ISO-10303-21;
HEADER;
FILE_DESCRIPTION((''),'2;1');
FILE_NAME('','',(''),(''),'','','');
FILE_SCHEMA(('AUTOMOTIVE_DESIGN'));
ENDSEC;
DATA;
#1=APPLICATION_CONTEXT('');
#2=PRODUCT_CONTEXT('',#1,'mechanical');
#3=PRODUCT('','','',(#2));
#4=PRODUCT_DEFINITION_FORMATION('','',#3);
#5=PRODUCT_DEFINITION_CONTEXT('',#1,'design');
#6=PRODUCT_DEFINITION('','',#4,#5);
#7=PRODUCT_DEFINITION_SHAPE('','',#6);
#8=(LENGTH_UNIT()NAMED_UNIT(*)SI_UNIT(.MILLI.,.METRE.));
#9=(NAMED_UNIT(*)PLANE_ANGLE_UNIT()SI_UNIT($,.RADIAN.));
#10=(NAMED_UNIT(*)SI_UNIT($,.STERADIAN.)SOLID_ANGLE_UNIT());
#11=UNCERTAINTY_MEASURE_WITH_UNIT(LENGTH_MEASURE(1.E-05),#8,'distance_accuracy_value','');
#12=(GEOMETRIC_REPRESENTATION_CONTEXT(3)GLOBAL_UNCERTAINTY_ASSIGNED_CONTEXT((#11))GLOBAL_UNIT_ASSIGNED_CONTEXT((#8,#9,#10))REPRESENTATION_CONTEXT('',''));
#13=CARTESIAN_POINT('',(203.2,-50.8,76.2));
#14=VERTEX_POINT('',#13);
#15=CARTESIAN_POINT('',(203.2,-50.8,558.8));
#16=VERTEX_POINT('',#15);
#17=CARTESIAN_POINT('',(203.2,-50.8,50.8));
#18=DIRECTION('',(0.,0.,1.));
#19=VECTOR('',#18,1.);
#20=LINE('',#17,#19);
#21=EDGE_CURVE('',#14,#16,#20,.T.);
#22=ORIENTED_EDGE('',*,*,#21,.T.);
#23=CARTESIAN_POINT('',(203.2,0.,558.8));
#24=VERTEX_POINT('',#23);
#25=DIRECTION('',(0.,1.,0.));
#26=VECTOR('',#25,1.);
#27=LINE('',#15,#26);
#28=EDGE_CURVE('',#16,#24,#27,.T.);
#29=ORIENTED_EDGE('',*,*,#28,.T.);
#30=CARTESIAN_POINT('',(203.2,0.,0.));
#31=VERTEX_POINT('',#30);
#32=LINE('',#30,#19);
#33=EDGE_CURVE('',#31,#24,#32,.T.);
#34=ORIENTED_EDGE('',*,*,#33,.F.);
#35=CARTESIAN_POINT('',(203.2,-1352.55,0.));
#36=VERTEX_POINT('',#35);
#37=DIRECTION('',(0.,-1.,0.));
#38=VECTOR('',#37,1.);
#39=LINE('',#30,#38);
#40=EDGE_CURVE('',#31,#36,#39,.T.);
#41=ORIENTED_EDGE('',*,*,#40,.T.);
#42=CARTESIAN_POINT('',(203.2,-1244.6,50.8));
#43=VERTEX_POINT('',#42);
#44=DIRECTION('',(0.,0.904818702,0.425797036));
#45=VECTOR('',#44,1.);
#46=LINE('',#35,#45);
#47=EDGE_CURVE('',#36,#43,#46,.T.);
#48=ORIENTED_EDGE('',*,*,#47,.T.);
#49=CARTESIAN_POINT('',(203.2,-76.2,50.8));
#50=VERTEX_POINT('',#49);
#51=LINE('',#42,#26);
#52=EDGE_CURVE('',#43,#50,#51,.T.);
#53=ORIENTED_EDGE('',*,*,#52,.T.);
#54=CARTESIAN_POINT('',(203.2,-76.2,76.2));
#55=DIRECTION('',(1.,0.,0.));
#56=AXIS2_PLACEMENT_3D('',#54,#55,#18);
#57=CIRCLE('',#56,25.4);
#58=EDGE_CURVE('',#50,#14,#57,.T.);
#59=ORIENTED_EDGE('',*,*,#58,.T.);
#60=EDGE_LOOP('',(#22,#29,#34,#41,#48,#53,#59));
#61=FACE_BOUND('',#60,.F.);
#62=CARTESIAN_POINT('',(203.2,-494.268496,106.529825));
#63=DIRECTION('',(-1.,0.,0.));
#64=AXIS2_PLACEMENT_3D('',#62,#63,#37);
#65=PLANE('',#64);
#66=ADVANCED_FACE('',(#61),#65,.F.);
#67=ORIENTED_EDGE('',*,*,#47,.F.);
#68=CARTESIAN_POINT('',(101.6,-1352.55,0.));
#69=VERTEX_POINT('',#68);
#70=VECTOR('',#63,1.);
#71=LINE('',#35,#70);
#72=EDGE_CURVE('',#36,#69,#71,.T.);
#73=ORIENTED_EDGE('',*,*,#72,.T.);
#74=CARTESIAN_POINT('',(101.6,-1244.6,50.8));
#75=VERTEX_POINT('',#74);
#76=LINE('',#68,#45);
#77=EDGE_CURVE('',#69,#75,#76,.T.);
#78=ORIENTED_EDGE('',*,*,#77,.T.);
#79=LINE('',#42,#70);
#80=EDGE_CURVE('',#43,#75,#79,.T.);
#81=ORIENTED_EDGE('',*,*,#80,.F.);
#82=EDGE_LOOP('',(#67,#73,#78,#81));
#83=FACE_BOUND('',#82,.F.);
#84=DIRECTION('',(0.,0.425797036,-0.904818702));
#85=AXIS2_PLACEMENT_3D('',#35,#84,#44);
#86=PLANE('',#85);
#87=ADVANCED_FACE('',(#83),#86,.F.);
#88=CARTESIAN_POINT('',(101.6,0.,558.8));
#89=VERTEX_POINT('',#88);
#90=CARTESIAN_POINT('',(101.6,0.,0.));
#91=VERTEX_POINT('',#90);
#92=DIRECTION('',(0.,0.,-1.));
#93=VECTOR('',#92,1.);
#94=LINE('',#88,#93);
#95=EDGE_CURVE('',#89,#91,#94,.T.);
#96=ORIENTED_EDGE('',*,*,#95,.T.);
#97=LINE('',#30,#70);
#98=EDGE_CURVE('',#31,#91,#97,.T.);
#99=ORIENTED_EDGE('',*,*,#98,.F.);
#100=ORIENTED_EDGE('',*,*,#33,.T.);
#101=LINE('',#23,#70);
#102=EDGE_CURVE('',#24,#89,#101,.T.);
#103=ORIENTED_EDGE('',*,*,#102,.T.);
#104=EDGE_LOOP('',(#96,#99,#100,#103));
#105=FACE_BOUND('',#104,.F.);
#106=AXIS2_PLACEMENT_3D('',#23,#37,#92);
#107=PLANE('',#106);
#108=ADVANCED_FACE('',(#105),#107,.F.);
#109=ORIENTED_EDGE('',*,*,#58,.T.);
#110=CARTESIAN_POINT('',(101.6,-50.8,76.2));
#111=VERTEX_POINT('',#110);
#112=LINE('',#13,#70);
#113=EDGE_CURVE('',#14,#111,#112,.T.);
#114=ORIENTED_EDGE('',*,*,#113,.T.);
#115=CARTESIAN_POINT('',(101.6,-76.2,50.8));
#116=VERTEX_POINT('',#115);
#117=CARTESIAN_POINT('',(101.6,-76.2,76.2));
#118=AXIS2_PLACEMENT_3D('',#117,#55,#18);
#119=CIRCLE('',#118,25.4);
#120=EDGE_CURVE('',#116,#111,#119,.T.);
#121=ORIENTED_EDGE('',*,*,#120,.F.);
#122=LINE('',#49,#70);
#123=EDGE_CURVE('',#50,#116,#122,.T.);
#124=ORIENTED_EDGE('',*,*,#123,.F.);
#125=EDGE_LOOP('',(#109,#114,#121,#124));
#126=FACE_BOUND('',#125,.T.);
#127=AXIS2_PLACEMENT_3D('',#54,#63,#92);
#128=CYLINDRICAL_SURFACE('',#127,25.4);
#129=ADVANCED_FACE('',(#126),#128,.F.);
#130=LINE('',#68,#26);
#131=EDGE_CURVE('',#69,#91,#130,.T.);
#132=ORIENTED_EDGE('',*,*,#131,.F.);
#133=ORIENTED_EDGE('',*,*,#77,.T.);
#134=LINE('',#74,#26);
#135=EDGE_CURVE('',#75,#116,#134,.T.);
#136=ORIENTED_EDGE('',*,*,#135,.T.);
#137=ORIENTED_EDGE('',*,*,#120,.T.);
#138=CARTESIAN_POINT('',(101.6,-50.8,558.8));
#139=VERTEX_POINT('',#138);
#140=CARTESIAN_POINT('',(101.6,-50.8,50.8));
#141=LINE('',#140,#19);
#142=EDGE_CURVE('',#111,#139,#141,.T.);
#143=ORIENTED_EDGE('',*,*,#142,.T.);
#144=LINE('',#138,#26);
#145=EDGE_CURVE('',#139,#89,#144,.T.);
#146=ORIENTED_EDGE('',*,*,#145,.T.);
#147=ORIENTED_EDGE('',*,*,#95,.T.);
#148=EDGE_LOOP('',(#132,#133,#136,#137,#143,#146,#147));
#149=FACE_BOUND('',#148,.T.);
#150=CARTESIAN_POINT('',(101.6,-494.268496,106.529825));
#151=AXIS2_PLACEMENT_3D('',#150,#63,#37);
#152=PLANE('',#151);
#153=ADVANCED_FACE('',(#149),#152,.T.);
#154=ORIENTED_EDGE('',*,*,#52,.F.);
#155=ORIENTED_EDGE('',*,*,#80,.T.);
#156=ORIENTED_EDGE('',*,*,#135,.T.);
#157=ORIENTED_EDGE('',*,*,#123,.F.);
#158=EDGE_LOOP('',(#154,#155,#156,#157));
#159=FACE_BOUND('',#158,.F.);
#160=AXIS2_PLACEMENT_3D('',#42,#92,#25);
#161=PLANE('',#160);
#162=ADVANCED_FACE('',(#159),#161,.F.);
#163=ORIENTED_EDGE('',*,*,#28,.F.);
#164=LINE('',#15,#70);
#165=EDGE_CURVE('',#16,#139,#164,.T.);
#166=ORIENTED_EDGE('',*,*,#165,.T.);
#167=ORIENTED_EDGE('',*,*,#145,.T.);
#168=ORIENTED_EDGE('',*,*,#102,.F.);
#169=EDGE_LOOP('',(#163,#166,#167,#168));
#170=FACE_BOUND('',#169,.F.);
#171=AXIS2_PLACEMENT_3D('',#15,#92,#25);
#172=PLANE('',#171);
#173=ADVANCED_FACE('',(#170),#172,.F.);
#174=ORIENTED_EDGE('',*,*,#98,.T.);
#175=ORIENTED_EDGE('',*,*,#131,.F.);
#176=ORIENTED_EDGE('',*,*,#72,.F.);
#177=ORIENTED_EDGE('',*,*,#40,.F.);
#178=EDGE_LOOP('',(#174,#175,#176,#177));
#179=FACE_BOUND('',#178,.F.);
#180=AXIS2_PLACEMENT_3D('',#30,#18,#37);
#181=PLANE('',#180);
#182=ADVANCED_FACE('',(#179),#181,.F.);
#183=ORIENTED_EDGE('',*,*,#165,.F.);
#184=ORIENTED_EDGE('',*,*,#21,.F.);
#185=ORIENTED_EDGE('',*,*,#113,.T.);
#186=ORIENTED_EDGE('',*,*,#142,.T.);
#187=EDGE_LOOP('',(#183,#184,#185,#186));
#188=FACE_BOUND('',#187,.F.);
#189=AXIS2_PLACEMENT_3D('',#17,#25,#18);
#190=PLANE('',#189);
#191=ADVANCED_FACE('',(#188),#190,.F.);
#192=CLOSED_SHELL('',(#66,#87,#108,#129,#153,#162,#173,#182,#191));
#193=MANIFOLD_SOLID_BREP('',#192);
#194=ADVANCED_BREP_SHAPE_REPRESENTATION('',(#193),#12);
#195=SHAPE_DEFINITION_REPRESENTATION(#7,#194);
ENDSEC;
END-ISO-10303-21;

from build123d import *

# Parameters (mm, degrees)
F1_DEPTH = 101.6
F2_R     = 25.4
F3_R     = 25.4
F4_DEPTH = 101.6
F5_ANGLE = 180


# Not quite as in the source:
# - a feature names something its author has since deleted; it is built from what else it names


with BuildPart() as f1:
    # F0 (on Right) → F1 (new body)
    with BuildSketch(Plane.YZ):
        Polygon((0, 38.1), (0, 0), (1352.55, 0), (1244.6, 50.8), (50.8, 50.8), (50.8, 558.8), (0, 558.8), align=None)
    extrude(amount=F1_DEPTH)

    # F2
    f2_edges = [f1.edges().sort_by_distance(p)[0] for p in [
        (50.8, 0, 0),
    ]]
    fillet(f2_edges, radius=F2_R)

    # F3
    f3_edges = [f1.edges().sort_by_distance(p)[0] for p in [
        (50.8, 50.8, 50.8),
    ]]
    fillet(f3_edges, radius=F3_R)

    # F0 (on Right) → F4 (join)
    with BuildSketch(Plane.YZ):
        Polygon((0, 38.1), (0, 0), (1352.55, 0), (1244.6, 50.8), (50.8, 50.8), (50.8, 558.8), (0, 558.8), align=None)
    extrude(amount=F4_DEPTH)


with BuildPart() as f1_1:
    # F5: moved
    add(f1.part.rotate(Axis((101.6, 0, 279.4), (0, 0, 1)), F5_ANGLE))


solid = f1_1.part
